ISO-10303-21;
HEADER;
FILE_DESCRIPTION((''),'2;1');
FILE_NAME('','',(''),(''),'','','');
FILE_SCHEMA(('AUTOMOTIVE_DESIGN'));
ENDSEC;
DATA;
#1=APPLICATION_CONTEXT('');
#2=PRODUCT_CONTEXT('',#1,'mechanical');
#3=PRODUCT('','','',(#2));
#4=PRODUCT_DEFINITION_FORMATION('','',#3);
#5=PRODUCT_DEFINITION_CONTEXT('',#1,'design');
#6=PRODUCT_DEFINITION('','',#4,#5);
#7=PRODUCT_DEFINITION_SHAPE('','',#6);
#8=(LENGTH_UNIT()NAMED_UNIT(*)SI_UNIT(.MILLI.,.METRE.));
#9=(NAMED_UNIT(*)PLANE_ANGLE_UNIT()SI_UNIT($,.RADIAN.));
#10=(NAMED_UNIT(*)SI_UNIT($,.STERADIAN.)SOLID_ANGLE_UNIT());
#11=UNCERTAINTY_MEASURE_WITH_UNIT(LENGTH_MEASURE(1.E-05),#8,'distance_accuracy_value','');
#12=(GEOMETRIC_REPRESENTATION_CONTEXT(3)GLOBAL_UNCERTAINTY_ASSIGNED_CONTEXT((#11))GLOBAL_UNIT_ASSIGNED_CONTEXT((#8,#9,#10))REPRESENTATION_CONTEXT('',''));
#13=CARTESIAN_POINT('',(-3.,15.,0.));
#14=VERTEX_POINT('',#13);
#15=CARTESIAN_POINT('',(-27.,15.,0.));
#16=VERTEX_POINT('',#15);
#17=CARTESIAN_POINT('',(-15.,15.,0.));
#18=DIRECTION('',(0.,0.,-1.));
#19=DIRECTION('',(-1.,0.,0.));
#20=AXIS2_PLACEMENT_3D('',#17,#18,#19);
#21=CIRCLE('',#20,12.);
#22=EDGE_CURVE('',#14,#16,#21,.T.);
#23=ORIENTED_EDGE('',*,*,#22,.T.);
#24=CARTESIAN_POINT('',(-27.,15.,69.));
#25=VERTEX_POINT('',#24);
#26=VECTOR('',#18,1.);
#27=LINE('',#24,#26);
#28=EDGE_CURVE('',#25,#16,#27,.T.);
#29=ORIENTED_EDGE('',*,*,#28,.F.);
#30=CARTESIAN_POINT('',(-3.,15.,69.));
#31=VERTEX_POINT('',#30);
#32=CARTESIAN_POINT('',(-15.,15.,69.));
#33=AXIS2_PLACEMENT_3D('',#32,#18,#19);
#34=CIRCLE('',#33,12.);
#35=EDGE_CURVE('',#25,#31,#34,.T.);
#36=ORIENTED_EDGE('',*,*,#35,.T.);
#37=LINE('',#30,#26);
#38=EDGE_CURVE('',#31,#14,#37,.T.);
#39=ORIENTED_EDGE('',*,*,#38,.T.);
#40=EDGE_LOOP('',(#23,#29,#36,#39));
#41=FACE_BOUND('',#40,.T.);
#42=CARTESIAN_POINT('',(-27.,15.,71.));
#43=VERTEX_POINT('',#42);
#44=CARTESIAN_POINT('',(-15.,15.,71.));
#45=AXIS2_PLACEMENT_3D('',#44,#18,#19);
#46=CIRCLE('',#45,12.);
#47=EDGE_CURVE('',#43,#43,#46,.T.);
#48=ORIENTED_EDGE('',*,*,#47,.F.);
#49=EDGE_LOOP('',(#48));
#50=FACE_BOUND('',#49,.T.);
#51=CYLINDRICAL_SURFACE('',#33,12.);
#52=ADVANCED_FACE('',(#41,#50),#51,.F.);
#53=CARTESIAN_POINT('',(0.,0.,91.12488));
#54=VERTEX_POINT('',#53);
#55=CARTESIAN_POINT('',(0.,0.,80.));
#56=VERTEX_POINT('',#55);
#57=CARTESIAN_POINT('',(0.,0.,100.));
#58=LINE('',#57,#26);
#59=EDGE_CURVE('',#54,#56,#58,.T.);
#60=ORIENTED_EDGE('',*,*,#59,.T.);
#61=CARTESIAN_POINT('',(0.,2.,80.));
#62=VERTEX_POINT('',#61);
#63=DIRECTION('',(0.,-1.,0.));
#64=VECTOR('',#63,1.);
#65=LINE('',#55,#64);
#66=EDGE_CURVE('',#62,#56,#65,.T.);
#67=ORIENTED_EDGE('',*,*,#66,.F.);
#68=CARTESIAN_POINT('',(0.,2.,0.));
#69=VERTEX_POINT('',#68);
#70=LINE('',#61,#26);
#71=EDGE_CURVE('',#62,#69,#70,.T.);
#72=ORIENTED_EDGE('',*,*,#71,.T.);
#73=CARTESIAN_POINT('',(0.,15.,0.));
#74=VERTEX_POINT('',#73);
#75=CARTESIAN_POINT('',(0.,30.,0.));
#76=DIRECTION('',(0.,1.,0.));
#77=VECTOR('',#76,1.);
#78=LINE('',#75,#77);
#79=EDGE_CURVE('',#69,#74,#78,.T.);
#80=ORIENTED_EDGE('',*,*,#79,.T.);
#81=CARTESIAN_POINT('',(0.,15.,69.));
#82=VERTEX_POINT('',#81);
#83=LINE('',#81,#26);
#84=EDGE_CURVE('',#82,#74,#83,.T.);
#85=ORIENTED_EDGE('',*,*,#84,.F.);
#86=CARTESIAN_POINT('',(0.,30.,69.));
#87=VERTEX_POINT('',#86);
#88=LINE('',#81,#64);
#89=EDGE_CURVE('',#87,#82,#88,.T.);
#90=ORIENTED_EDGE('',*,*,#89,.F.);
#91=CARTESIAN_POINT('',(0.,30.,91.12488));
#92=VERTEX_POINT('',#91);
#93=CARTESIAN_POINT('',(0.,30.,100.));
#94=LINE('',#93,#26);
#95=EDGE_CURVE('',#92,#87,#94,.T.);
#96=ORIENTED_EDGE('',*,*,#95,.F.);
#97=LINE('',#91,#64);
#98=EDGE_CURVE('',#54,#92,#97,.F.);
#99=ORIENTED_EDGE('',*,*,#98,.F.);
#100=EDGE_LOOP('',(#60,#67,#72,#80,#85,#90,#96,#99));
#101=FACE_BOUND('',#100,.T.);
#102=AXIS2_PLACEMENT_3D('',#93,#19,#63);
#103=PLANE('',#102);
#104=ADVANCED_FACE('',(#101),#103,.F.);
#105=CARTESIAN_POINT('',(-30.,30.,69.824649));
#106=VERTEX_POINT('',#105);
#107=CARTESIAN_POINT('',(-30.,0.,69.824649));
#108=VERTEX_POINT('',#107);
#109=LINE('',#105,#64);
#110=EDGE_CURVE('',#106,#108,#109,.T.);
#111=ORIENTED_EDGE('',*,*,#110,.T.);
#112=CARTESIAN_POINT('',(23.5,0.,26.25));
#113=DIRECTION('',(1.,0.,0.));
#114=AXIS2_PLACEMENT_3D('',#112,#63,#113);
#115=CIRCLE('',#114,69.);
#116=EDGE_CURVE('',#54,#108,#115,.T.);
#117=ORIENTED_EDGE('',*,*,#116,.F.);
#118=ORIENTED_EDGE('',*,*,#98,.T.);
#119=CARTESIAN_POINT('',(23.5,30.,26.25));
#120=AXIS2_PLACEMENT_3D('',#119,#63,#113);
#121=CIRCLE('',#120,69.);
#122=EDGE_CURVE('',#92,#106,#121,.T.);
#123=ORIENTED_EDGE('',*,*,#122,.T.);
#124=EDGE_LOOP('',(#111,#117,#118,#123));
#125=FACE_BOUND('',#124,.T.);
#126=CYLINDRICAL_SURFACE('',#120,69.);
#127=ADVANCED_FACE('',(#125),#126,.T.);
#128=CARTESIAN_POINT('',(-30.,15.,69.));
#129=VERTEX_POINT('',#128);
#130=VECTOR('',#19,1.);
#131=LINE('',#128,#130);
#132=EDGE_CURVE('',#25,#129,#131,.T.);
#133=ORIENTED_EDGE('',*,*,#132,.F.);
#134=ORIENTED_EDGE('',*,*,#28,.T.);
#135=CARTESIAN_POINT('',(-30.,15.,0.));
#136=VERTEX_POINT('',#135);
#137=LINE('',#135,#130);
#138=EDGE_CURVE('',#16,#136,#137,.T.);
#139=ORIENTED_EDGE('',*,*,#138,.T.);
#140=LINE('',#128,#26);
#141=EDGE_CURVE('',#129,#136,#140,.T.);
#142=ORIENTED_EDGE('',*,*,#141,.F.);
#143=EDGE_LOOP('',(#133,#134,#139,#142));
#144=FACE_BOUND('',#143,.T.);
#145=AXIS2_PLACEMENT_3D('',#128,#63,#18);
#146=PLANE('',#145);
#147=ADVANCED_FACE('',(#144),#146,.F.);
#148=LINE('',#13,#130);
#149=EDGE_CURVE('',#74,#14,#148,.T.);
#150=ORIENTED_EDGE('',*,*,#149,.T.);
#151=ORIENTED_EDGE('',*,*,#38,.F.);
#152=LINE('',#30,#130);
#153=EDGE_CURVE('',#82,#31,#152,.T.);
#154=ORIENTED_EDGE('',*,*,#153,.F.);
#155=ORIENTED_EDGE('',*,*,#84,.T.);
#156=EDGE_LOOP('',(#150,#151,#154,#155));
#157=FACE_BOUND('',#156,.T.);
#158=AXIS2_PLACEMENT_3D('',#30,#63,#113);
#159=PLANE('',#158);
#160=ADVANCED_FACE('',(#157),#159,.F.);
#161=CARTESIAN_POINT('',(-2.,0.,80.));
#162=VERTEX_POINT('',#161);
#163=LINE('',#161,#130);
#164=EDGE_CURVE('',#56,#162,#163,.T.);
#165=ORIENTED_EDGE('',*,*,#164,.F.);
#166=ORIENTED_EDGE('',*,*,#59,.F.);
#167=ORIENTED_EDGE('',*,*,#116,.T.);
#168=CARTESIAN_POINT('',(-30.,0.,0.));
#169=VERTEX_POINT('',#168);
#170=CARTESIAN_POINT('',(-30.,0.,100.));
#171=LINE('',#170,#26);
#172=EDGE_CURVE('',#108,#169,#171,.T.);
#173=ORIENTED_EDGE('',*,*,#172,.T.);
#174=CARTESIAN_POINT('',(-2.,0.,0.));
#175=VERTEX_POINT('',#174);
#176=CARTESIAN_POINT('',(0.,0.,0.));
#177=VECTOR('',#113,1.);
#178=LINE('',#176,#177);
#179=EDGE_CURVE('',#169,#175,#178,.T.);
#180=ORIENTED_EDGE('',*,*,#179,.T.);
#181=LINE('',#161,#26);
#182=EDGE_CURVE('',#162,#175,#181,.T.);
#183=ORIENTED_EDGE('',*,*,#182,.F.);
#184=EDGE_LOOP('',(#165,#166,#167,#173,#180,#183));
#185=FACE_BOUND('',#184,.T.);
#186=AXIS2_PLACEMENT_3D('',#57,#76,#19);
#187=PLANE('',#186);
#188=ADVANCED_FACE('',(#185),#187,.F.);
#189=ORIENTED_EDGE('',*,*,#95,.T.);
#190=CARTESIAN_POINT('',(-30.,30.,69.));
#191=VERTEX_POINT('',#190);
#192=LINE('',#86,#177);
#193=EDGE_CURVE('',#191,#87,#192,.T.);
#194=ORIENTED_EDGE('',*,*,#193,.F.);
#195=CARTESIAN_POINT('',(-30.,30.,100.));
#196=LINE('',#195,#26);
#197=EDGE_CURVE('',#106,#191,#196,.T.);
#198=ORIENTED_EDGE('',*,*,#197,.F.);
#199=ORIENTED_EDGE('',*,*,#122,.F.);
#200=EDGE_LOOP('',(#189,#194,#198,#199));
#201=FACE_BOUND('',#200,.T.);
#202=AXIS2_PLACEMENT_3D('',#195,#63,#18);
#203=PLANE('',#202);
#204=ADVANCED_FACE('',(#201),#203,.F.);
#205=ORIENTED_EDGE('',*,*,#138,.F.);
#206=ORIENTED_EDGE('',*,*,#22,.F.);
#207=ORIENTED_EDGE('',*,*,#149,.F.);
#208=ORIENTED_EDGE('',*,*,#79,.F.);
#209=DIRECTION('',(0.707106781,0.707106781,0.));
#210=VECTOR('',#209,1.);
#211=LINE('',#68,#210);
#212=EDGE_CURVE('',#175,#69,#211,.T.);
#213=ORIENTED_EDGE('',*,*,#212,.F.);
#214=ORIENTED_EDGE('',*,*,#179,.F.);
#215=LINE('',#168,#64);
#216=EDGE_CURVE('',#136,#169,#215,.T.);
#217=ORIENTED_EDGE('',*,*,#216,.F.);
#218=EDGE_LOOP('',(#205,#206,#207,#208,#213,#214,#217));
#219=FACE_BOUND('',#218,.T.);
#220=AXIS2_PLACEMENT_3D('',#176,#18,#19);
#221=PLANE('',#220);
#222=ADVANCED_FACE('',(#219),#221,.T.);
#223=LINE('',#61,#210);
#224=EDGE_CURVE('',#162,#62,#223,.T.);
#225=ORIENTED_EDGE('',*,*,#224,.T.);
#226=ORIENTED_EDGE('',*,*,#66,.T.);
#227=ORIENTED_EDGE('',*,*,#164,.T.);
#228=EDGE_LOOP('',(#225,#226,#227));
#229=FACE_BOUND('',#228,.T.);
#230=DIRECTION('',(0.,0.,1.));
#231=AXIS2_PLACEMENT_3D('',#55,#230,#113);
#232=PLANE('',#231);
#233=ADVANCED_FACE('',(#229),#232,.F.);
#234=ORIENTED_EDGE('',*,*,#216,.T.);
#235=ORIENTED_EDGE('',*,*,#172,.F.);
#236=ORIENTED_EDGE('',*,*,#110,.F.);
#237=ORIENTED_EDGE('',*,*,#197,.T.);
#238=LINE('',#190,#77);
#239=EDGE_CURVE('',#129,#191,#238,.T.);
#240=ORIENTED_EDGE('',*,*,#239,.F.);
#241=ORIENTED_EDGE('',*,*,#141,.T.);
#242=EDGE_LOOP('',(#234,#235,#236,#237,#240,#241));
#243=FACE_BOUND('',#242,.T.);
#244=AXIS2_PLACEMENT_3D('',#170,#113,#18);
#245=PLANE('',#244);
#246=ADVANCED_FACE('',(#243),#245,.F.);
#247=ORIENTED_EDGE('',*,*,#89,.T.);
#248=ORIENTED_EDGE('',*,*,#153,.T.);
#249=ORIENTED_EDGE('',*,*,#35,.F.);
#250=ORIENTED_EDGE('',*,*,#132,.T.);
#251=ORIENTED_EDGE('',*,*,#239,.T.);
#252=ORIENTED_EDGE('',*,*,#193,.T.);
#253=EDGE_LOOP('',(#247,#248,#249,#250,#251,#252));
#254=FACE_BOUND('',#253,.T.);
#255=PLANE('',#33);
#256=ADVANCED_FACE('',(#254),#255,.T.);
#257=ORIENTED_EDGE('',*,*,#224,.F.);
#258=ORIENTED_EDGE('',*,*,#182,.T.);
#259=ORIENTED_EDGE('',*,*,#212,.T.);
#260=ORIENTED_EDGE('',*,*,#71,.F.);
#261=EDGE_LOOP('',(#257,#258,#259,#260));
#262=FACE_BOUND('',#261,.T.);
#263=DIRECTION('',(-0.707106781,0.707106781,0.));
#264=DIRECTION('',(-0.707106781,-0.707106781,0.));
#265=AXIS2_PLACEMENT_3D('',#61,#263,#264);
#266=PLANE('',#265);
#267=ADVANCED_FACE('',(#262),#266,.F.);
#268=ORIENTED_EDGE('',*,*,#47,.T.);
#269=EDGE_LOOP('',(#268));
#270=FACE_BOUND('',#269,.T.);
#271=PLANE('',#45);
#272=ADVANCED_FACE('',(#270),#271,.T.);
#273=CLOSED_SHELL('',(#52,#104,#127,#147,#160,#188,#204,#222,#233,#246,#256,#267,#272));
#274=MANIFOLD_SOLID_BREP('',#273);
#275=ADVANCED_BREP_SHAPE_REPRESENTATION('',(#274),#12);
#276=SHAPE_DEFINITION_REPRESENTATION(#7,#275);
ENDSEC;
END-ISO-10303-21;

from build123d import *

# Parameters (mm, degrees)
SKETCH2_W           = 30
SKETCH2_H           = 30
BOSS_EXTRUDE1_DEPTH = 100
CUT_EXTRUDE1_START  = -30
CUT_EXTRUDE1_DEPTH  = 30
CUT_EXTRUDE2_DEPTH  = 69
CUT_EXTRUDE3_DEPTH  = 80
SKETCH6_R           = 12
CUT_EXTRUDE4_DEPTH  = 2


# Read off the part's stored shape, not the designer's step: Cut-Extrude1
with BuildPart() as part:
    # Sketch2 → Boss-Extrude1 (new body)
    with BuildSketch(Plane.XY):
        with Locations((-15, 15)):
            Rectangle(SKETCH2_W, SKETCH2_H)
    extrude(amount=BOSS_EXTRUDE1_DEPTH)

    # Cut-Extrude1 outline → Cut-Extrude1 (cut)
    with BuildSketch(Plane.XZ.offset(CUT_EXTRUDE1_START)):
        with BuildLine():
            ThreePointArc((-30, 69.824648593), (-16.445900415, 82.511221459), (0, 91.124879576))
            Line((0, 91.124879576), (0, 100))
            Line((0, 100), (-30, 100))
            Line((-30, 100), (-30, 69.824648593))
        make_face()
    extrude(amount=CUT_EXTRUDE1_DEPTH, mode=Mode.SUBTRACT)

    # Sketch4 → Cut-Extrude2 (cut)
    with BuildSketch(Plane(origin=(0, 0, 0), x_dir=(-1, 0, 0), z_dir=(0, 0, -1))):
        with BuildLine():
            Line((3, 15), (0, 15))
            Line((0, 15), (0, 30))
            Line((0, 30), (30, 30))
            Line((30, 30), (30, 15))
            Line((30, 15), (27, 15))
            ThreePointArc((27, 15), (15, 3), (3, 15))
        make_face()
    extrude(amount=-CUT_EXTRUDE2_DEPTH, mode=Mode.SUBTRACT)

    # Sketch5 → Cut-Extrude3 (cut)
    with BuildSketch(Plane(origin=(0, 0, 0), x_dir=(-1, 0, 0), z_dir=(0, 0, -1))):
        Polygon((0, 0), (0, 2), (2, 0), align=None)
    extrude(amount=-CUT_EXTRUDE3_DEPTH, mode=Mode.SUBTRACT)

    # Sketch6 → Cut-Extrude4 (cut)
    with BuildSketch(Plane(origin=(0, 0, 69), x_dir=(-1, 0, 0), z_dir=(0, 0, -1))):
        with Locations((15, 15)):
            Circle(SKETCH6_R)
    extrude(amount=-CUT_EXTRUDE4_DEPTH, mode=Mode.SUBTRACT)


solid = part.part
